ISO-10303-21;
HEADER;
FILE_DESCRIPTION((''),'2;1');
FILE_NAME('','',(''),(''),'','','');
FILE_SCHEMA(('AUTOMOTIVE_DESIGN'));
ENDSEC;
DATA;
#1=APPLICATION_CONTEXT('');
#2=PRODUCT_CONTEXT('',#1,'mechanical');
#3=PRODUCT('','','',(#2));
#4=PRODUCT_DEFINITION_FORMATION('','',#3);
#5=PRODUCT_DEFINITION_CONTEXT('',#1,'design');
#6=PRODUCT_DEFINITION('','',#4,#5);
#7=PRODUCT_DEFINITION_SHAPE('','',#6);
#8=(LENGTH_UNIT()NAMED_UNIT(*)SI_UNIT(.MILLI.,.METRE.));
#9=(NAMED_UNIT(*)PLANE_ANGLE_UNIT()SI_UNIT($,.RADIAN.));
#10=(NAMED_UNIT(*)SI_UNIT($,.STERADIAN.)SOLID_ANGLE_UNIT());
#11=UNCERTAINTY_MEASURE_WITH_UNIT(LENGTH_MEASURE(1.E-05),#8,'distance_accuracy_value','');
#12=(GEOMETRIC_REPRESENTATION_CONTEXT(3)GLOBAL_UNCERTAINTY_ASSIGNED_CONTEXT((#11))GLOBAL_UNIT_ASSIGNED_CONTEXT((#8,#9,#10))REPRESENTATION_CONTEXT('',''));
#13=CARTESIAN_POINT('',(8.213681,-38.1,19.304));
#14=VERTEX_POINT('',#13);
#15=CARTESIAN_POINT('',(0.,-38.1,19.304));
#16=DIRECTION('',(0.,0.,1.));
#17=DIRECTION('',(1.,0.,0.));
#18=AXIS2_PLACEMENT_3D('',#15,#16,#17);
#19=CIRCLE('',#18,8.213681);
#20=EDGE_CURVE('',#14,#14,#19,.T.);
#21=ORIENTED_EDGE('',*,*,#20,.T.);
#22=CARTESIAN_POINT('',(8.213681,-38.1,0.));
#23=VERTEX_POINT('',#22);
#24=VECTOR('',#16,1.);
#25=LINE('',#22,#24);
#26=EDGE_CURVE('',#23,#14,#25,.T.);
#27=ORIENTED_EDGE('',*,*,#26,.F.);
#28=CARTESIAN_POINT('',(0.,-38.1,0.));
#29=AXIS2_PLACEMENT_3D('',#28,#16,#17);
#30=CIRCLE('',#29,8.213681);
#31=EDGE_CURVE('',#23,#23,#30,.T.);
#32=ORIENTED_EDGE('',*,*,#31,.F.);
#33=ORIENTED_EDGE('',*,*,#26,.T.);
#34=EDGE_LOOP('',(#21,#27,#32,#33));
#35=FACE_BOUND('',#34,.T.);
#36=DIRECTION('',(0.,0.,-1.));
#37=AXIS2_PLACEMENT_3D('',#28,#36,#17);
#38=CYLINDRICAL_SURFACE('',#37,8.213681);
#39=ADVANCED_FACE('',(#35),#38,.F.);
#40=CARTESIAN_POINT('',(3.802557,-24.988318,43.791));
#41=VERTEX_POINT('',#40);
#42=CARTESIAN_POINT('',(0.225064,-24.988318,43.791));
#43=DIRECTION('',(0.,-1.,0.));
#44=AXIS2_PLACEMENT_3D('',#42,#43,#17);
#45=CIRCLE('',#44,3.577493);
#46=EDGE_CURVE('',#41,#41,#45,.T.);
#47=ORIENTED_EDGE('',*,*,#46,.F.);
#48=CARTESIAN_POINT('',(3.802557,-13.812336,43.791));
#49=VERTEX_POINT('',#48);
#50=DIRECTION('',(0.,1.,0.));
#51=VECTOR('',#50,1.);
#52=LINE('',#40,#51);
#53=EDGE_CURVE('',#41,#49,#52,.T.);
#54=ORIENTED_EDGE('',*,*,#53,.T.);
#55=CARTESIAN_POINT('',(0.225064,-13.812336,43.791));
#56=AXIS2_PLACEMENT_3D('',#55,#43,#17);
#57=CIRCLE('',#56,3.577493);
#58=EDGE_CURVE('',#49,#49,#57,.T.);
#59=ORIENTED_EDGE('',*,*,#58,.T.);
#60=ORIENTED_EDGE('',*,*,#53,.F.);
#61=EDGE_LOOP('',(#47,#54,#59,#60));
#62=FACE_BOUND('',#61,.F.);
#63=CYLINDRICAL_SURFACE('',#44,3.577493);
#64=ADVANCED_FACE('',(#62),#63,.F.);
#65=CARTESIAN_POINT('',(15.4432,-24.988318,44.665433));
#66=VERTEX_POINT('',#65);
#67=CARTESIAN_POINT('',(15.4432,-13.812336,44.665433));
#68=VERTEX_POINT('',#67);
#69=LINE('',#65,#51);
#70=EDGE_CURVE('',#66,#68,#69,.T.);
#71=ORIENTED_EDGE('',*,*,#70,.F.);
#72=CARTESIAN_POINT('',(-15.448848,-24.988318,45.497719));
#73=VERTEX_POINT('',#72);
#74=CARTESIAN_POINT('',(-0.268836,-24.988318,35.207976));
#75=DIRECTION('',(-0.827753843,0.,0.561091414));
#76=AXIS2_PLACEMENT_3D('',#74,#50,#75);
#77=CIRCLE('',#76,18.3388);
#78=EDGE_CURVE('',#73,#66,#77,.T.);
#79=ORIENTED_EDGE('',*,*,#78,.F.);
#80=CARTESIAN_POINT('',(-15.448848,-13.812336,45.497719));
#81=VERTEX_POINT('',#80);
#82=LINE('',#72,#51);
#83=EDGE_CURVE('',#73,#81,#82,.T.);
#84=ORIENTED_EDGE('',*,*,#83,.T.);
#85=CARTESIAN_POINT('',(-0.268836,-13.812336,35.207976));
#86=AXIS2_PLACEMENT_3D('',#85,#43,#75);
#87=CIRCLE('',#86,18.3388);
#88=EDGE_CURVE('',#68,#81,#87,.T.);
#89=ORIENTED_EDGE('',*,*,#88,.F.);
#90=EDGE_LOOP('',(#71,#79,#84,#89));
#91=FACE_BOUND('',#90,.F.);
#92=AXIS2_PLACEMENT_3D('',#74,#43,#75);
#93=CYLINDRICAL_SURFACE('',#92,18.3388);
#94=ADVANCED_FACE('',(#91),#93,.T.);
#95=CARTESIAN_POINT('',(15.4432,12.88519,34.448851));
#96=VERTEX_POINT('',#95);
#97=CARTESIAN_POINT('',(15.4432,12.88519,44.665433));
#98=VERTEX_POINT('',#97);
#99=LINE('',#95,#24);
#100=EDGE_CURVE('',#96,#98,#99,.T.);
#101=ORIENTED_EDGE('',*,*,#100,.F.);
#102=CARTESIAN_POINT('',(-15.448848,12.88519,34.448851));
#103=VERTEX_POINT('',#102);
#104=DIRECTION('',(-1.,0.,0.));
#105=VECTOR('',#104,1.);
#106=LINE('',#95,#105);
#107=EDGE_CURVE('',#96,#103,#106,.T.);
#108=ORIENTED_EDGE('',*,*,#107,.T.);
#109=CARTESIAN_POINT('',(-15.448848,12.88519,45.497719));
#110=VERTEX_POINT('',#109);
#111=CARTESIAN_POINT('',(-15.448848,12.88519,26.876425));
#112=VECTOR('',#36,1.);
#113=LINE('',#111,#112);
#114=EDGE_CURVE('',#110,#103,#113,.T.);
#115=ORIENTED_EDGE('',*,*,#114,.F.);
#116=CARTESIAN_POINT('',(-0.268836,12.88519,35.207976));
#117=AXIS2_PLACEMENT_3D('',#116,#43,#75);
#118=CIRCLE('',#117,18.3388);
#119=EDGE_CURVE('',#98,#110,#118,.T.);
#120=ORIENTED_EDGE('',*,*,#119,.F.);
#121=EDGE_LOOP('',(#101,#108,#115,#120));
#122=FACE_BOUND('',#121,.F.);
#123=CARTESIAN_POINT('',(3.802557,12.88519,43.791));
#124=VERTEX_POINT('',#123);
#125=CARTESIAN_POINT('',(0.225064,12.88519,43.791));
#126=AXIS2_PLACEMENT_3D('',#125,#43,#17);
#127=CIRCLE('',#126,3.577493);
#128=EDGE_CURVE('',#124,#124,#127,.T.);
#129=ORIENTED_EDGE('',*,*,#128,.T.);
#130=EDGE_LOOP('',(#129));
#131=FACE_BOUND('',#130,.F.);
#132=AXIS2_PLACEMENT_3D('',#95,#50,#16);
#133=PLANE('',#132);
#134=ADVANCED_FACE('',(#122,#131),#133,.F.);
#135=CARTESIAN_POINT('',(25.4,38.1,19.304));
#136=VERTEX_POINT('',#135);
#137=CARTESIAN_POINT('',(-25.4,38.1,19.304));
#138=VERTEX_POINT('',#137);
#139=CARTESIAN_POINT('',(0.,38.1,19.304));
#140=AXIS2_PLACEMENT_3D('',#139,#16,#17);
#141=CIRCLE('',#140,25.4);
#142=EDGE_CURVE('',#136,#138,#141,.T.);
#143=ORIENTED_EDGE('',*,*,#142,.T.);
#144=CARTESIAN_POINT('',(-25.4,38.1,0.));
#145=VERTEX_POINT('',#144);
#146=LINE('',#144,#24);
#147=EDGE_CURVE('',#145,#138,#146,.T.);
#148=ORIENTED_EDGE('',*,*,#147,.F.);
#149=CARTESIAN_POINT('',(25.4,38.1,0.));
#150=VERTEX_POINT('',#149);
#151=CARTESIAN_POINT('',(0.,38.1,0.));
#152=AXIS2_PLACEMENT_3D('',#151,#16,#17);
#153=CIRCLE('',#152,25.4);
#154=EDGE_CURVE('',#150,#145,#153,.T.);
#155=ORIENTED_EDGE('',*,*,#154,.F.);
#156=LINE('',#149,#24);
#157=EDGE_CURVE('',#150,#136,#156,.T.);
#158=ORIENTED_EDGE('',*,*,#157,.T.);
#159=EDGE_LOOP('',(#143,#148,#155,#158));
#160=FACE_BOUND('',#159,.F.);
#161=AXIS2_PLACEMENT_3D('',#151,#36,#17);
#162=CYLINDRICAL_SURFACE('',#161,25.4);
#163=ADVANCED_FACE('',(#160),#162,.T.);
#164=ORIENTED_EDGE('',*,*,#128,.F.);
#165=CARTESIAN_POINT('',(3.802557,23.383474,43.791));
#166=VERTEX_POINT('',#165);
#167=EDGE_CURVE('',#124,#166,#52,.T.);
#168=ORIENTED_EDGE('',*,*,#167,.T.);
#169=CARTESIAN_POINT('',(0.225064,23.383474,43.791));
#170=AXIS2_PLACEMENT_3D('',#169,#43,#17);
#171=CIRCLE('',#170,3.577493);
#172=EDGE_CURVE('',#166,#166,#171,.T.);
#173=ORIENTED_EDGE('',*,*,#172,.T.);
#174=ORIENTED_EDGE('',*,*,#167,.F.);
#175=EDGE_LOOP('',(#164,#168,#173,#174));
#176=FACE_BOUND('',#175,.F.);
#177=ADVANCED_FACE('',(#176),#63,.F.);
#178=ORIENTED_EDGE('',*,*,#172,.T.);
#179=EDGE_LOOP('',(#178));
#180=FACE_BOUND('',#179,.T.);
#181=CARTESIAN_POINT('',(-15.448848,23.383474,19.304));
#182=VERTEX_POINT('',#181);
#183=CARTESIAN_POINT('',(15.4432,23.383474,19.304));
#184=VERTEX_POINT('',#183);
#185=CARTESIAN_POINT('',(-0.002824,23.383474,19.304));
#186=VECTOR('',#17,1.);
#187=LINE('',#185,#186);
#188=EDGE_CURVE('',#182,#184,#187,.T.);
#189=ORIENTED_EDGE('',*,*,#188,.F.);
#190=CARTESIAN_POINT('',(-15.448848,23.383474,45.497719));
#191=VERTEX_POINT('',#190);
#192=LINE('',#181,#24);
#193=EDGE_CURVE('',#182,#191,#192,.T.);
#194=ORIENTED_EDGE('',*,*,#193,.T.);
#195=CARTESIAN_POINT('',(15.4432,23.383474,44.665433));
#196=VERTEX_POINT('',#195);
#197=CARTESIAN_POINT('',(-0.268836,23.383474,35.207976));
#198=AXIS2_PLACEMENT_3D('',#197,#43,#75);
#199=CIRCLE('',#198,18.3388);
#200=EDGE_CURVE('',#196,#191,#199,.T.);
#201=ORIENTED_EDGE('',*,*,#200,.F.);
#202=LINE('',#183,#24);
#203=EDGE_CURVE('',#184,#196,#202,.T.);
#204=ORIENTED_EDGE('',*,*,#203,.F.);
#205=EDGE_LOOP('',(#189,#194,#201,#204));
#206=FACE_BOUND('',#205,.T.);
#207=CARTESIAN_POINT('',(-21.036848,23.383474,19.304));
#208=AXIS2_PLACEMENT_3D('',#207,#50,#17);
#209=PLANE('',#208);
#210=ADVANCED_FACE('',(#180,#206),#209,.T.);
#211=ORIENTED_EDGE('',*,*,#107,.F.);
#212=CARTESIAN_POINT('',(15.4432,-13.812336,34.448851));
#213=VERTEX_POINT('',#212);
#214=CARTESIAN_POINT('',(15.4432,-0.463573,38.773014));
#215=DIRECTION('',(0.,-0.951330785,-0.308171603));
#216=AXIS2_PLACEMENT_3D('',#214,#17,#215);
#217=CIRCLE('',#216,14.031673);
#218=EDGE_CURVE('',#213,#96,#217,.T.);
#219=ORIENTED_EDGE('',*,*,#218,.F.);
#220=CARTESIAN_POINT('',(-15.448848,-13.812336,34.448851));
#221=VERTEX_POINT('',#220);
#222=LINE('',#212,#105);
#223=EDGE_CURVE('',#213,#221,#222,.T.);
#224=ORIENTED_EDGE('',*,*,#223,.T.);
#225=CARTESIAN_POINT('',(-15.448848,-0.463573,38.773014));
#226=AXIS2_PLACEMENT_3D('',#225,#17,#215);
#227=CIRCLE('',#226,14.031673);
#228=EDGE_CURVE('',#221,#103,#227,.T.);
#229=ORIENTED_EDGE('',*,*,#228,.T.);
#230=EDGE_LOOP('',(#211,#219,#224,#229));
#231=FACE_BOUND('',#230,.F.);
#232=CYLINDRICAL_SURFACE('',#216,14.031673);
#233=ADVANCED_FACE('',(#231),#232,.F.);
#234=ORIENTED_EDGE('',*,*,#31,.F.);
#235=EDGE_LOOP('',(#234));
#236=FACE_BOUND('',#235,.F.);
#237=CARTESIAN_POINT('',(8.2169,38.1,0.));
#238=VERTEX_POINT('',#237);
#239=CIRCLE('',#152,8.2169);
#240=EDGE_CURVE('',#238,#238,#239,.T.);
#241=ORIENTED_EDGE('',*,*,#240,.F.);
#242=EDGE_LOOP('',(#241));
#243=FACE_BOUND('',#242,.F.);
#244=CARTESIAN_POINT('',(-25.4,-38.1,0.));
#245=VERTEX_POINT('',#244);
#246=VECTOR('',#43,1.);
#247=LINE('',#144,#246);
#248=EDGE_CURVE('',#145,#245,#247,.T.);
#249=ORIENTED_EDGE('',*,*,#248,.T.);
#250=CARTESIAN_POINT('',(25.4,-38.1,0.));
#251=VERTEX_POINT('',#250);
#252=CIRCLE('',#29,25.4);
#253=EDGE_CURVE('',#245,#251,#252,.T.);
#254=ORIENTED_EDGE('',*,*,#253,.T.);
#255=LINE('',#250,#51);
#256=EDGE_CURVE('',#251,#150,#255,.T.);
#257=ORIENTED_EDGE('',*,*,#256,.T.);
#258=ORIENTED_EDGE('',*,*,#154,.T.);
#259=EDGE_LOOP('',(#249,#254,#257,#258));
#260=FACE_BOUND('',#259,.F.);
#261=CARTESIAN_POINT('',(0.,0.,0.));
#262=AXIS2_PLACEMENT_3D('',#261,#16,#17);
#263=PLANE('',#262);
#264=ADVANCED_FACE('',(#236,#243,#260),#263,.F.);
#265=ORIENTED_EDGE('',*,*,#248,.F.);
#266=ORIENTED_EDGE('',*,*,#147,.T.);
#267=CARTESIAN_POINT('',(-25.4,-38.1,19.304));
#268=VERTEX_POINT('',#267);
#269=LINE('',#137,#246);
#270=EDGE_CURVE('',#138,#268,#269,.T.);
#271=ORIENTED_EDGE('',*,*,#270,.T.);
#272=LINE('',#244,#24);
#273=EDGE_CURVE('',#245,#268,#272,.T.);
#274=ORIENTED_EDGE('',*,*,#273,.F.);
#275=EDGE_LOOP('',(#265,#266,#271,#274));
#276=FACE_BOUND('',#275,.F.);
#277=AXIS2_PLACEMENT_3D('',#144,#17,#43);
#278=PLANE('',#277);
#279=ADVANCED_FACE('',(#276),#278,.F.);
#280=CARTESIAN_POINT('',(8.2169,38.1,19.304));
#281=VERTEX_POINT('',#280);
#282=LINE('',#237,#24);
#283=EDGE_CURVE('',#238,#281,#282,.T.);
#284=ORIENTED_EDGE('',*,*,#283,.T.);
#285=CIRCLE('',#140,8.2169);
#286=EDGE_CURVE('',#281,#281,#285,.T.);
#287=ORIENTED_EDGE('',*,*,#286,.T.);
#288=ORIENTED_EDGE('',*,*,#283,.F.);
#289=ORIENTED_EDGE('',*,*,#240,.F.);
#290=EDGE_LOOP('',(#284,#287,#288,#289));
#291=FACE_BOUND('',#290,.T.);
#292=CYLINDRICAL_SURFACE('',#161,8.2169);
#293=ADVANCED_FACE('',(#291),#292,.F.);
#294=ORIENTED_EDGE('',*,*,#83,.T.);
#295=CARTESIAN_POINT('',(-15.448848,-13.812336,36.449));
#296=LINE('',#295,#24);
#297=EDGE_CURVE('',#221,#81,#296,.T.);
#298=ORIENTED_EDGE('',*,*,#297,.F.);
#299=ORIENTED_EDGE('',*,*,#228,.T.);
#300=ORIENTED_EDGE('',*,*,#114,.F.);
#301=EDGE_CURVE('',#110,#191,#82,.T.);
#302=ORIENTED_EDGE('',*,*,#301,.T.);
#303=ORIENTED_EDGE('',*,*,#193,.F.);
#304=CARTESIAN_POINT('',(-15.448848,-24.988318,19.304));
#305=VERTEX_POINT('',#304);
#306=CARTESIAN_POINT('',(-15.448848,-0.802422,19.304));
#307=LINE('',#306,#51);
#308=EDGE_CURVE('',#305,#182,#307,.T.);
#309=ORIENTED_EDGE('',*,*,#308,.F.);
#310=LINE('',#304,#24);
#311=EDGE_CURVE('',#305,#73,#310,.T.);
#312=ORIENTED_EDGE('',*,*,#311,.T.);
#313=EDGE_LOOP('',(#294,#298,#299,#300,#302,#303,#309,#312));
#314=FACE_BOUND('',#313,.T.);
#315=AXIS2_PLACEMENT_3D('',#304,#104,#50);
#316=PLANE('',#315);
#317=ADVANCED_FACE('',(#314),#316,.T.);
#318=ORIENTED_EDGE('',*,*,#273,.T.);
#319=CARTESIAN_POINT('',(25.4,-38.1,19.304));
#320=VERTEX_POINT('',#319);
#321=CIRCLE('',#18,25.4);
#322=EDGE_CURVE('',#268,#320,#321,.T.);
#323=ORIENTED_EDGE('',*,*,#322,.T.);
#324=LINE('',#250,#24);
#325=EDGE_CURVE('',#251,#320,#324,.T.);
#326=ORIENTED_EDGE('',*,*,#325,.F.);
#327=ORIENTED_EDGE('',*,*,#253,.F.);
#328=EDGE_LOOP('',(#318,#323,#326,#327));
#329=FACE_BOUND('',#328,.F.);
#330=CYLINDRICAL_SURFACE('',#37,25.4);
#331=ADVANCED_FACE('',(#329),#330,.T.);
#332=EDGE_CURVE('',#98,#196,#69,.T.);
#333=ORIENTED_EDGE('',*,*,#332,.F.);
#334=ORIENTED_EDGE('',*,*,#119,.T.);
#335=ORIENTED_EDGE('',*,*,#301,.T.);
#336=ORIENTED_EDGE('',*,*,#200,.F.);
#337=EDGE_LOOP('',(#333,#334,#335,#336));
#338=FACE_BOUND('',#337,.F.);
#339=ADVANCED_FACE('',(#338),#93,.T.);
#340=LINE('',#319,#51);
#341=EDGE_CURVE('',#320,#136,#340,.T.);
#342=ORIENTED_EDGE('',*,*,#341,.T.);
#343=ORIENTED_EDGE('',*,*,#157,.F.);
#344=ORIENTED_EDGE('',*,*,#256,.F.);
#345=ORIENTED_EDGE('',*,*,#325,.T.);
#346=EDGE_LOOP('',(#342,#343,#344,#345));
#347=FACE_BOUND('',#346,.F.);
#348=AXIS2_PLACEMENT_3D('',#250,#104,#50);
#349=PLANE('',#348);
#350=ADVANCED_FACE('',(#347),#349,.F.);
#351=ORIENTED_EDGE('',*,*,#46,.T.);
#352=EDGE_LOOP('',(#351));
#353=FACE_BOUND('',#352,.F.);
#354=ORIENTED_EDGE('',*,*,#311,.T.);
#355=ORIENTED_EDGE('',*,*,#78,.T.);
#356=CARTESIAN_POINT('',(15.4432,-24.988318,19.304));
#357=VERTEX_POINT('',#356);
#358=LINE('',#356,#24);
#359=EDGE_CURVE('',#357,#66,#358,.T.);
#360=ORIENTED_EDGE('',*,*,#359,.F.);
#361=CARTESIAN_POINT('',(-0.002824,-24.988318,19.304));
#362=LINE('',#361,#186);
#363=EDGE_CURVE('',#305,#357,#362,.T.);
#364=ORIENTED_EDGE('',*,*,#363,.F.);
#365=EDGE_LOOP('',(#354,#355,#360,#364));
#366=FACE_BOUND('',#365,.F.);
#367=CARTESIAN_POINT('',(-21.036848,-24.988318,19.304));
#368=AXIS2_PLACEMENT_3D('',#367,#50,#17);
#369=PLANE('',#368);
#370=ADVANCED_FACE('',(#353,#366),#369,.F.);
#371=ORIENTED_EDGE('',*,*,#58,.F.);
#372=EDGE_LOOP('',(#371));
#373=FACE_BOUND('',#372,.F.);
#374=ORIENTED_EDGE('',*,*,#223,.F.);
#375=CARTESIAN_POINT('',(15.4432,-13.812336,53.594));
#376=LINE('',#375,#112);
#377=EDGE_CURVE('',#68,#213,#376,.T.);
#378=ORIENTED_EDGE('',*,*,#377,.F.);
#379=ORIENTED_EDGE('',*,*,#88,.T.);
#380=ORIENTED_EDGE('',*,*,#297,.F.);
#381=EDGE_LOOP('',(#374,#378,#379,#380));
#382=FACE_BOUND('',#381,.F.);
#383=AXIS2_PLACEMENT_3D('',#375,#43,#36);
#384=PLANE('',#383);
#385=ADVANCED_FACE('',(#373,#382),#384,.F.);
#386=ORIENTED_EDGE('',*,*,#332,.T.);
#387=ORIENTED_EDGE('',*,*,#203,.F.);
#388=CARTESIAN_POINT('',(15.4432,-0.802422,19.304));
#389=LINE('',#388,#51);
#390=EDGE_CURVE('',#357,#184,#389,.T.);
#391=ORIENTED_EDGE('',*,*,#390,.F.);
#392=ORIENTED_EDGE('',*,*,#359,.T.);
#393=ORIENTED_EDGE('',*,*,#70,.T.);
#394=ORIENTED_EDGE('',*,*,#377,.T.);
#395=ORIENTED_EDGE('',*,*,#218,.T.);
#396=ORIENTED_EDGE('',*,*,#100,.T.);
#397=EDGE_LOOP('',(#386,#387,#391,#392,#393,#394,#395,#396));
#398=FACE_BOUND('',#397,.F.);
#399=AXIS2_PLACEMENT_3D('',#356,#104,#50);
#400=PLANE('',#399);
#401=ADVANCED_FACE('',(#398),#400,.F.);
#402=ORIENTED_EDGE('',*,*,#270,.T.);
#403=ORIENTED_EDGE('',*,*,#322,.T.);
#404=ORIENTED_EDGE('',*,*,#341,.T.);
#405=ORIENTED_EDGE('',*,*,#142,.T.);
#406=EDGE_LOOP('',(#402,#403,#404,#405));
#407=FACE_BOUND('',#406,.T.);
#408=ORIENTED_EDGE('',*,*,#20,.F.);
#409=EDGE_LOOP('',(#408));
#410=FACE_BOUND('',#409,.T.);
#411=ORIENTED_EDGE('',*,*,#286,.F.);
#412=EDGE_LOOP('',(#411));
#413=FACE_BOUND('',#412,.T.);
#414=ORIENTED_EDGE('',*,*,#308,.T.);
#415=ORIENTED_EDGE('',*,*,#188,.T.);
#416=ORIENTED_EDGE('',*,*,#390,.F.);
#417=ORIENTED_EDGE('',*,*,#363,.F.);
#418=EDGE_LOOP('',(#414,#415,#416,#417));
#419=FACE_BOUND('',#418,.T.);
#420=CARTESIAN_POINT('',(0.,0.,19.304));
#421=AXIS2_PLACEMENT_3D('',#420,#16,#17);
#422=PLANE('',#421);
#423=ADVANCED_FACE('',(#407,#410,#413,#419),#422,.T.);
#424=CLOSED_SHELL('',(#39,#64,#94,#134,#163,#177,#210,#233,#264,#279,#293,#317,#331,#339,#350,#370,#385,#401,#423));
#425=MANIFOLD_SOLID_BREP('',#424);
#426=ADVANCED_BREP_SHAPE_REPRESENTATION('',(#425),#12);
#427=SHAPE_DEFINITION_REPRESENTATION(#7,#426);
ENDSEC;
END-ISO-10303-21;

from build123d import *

# Parameters (mm, degrees)
F0_R      = 8.2136813159
F0_R_2    = 8.2169
F1_DEPTH  = 19.304
F2_W      = 42.0680484259
F2_H      = 48.3717918396
F3_DEPTH  = 34.29
F4_DEPTH  = 5.588
F5_DEPTH  = 5.588
F8_DEPTH  = 34.29
F9_DEPTH  = 60.198
F10_R     = 3.577492803
F11_DEPTH = 65.786


# Not quite as in the source:
# - a feature names something its author has since deleted; it is built from what else it names


with BuildPart() as f1:
    # F0 (on Top) → F1 (new body)
    with BuildSketch(Plane.XY):
        with BuildLine():
            Line((25.4, -38.1), (25.4, 38.1))
            ThreePointArc((25.4, 38.1), (0, 12.7), (-25.4, 38.1))
            Line((-25.4, 38.1), (-25.4, -38.1))
            ThreePointArc((-25.4, -38.1), (0, -12.7), (25.4, -38.1))
        make_face()
        with BuildLine():
            ThreePointArc((-25.4, -38.1), (0, -63.5), (25.4, -38.1))
            ThreePointArc((25.4, -38.1), (0, -12.7), (-25.4, -38.1))
        make_face()
        with Locations((0, -38.1)):
            Circle(F0_R, mode=Mode.SUBTRACT)
        with BuildLine():
            ThreePointArc((-25.4, 38.1), (0, 12.7), (25.4, 38.1))
            ThreePointArc((25.4, 38.1), (0, 63.5), (-25.4, 38.1))
        make_face()
        with Locations((0, 38.1)):
            Circle(F0_R_2, mode=Mode.SUBTRACT)
    extrude(amount=F1_DEPTH)

    # F2 (on face) → F3 (join)
    with BuildSketch(Plane.XY.offset(19.304)):
        with Locations((-0.0028242129, -0.8024219424)):
            Rectangle(F2_W, F2_H)
    extrude(amount=F3_DEPTH)

    # F4 (cut): a face of the model
    f4_faces = [f1.faces().sort_by_distance(p)[0] for p in [
        (21.0312, -0.8024219424, 36.449),
    ]]
    extrude(f4_faces, amount=-F4_DEPTH, mode=Mode.SUBTRACT)

    # F5 (cut): a face of the model
    f5_faces = [f1.faces().sort_by_distance(p)[0] for p in [
        (-21.0368484259, -0.8024219424, 36.449),
    ]]
    extrude(f5_faces, amount=-F5_DEPTH, mode=Mode.SUBTRACT)

    # F7 (on face) → F8 (cut)
    with BuildSketch(Plane.YZ.offset(15.4432)):
        with BuildLine():
            Line((12.8851897717, 53.594), (-13.8123355974, 53.594))
            Line((-13.8123355974, 53.594), (-13.8123355974, 34.4488508999))
            ThreePointArc((-13.8123355974, 34.4488508999), (-0.4635729128, 24.7413409198), (12.8851897717, 34.4488508999))
            Line((12.8851897717, 34.4488508999), (12.8851897717, 53.594))
        make_face()
    extrude(amount=-F8_DEPTH, mode=Mode.SUBTRACT)

    # F6 (on face) → F9 (cut)
    with BuildSketch(Plane.XZ.offset(24.9883178622)):
        with BuildLine():
            ThreePointArc((-15.4488484259, 45.4977191985), (0.2250638301, 53.5401239092), (15.4432, 44.6654334664))
            Line((15.4432, 44.6654334664), (15.4432, 53.594))
            Line((15.4432, 53.594), (-15.4488484259, 53.594))
            Line((-15.4488484259, 53.594), (-15.4488484259, 45.4977191985))
        make_face()
    extrude(amount=-F9_DEPTH, mode=Mode.SUBTRACT)

    # F10 (on face) → F11 (cut)
    with BuildSketch(Plane.XZ.offset(24.9883178622)):
        with Locations((0.2250638301, 43.7909998)):
            Circle(F10_R)
    extrude(amount=-F11_DEPTH, mode=Mode.SUBTRACT)


solid = f1.part
